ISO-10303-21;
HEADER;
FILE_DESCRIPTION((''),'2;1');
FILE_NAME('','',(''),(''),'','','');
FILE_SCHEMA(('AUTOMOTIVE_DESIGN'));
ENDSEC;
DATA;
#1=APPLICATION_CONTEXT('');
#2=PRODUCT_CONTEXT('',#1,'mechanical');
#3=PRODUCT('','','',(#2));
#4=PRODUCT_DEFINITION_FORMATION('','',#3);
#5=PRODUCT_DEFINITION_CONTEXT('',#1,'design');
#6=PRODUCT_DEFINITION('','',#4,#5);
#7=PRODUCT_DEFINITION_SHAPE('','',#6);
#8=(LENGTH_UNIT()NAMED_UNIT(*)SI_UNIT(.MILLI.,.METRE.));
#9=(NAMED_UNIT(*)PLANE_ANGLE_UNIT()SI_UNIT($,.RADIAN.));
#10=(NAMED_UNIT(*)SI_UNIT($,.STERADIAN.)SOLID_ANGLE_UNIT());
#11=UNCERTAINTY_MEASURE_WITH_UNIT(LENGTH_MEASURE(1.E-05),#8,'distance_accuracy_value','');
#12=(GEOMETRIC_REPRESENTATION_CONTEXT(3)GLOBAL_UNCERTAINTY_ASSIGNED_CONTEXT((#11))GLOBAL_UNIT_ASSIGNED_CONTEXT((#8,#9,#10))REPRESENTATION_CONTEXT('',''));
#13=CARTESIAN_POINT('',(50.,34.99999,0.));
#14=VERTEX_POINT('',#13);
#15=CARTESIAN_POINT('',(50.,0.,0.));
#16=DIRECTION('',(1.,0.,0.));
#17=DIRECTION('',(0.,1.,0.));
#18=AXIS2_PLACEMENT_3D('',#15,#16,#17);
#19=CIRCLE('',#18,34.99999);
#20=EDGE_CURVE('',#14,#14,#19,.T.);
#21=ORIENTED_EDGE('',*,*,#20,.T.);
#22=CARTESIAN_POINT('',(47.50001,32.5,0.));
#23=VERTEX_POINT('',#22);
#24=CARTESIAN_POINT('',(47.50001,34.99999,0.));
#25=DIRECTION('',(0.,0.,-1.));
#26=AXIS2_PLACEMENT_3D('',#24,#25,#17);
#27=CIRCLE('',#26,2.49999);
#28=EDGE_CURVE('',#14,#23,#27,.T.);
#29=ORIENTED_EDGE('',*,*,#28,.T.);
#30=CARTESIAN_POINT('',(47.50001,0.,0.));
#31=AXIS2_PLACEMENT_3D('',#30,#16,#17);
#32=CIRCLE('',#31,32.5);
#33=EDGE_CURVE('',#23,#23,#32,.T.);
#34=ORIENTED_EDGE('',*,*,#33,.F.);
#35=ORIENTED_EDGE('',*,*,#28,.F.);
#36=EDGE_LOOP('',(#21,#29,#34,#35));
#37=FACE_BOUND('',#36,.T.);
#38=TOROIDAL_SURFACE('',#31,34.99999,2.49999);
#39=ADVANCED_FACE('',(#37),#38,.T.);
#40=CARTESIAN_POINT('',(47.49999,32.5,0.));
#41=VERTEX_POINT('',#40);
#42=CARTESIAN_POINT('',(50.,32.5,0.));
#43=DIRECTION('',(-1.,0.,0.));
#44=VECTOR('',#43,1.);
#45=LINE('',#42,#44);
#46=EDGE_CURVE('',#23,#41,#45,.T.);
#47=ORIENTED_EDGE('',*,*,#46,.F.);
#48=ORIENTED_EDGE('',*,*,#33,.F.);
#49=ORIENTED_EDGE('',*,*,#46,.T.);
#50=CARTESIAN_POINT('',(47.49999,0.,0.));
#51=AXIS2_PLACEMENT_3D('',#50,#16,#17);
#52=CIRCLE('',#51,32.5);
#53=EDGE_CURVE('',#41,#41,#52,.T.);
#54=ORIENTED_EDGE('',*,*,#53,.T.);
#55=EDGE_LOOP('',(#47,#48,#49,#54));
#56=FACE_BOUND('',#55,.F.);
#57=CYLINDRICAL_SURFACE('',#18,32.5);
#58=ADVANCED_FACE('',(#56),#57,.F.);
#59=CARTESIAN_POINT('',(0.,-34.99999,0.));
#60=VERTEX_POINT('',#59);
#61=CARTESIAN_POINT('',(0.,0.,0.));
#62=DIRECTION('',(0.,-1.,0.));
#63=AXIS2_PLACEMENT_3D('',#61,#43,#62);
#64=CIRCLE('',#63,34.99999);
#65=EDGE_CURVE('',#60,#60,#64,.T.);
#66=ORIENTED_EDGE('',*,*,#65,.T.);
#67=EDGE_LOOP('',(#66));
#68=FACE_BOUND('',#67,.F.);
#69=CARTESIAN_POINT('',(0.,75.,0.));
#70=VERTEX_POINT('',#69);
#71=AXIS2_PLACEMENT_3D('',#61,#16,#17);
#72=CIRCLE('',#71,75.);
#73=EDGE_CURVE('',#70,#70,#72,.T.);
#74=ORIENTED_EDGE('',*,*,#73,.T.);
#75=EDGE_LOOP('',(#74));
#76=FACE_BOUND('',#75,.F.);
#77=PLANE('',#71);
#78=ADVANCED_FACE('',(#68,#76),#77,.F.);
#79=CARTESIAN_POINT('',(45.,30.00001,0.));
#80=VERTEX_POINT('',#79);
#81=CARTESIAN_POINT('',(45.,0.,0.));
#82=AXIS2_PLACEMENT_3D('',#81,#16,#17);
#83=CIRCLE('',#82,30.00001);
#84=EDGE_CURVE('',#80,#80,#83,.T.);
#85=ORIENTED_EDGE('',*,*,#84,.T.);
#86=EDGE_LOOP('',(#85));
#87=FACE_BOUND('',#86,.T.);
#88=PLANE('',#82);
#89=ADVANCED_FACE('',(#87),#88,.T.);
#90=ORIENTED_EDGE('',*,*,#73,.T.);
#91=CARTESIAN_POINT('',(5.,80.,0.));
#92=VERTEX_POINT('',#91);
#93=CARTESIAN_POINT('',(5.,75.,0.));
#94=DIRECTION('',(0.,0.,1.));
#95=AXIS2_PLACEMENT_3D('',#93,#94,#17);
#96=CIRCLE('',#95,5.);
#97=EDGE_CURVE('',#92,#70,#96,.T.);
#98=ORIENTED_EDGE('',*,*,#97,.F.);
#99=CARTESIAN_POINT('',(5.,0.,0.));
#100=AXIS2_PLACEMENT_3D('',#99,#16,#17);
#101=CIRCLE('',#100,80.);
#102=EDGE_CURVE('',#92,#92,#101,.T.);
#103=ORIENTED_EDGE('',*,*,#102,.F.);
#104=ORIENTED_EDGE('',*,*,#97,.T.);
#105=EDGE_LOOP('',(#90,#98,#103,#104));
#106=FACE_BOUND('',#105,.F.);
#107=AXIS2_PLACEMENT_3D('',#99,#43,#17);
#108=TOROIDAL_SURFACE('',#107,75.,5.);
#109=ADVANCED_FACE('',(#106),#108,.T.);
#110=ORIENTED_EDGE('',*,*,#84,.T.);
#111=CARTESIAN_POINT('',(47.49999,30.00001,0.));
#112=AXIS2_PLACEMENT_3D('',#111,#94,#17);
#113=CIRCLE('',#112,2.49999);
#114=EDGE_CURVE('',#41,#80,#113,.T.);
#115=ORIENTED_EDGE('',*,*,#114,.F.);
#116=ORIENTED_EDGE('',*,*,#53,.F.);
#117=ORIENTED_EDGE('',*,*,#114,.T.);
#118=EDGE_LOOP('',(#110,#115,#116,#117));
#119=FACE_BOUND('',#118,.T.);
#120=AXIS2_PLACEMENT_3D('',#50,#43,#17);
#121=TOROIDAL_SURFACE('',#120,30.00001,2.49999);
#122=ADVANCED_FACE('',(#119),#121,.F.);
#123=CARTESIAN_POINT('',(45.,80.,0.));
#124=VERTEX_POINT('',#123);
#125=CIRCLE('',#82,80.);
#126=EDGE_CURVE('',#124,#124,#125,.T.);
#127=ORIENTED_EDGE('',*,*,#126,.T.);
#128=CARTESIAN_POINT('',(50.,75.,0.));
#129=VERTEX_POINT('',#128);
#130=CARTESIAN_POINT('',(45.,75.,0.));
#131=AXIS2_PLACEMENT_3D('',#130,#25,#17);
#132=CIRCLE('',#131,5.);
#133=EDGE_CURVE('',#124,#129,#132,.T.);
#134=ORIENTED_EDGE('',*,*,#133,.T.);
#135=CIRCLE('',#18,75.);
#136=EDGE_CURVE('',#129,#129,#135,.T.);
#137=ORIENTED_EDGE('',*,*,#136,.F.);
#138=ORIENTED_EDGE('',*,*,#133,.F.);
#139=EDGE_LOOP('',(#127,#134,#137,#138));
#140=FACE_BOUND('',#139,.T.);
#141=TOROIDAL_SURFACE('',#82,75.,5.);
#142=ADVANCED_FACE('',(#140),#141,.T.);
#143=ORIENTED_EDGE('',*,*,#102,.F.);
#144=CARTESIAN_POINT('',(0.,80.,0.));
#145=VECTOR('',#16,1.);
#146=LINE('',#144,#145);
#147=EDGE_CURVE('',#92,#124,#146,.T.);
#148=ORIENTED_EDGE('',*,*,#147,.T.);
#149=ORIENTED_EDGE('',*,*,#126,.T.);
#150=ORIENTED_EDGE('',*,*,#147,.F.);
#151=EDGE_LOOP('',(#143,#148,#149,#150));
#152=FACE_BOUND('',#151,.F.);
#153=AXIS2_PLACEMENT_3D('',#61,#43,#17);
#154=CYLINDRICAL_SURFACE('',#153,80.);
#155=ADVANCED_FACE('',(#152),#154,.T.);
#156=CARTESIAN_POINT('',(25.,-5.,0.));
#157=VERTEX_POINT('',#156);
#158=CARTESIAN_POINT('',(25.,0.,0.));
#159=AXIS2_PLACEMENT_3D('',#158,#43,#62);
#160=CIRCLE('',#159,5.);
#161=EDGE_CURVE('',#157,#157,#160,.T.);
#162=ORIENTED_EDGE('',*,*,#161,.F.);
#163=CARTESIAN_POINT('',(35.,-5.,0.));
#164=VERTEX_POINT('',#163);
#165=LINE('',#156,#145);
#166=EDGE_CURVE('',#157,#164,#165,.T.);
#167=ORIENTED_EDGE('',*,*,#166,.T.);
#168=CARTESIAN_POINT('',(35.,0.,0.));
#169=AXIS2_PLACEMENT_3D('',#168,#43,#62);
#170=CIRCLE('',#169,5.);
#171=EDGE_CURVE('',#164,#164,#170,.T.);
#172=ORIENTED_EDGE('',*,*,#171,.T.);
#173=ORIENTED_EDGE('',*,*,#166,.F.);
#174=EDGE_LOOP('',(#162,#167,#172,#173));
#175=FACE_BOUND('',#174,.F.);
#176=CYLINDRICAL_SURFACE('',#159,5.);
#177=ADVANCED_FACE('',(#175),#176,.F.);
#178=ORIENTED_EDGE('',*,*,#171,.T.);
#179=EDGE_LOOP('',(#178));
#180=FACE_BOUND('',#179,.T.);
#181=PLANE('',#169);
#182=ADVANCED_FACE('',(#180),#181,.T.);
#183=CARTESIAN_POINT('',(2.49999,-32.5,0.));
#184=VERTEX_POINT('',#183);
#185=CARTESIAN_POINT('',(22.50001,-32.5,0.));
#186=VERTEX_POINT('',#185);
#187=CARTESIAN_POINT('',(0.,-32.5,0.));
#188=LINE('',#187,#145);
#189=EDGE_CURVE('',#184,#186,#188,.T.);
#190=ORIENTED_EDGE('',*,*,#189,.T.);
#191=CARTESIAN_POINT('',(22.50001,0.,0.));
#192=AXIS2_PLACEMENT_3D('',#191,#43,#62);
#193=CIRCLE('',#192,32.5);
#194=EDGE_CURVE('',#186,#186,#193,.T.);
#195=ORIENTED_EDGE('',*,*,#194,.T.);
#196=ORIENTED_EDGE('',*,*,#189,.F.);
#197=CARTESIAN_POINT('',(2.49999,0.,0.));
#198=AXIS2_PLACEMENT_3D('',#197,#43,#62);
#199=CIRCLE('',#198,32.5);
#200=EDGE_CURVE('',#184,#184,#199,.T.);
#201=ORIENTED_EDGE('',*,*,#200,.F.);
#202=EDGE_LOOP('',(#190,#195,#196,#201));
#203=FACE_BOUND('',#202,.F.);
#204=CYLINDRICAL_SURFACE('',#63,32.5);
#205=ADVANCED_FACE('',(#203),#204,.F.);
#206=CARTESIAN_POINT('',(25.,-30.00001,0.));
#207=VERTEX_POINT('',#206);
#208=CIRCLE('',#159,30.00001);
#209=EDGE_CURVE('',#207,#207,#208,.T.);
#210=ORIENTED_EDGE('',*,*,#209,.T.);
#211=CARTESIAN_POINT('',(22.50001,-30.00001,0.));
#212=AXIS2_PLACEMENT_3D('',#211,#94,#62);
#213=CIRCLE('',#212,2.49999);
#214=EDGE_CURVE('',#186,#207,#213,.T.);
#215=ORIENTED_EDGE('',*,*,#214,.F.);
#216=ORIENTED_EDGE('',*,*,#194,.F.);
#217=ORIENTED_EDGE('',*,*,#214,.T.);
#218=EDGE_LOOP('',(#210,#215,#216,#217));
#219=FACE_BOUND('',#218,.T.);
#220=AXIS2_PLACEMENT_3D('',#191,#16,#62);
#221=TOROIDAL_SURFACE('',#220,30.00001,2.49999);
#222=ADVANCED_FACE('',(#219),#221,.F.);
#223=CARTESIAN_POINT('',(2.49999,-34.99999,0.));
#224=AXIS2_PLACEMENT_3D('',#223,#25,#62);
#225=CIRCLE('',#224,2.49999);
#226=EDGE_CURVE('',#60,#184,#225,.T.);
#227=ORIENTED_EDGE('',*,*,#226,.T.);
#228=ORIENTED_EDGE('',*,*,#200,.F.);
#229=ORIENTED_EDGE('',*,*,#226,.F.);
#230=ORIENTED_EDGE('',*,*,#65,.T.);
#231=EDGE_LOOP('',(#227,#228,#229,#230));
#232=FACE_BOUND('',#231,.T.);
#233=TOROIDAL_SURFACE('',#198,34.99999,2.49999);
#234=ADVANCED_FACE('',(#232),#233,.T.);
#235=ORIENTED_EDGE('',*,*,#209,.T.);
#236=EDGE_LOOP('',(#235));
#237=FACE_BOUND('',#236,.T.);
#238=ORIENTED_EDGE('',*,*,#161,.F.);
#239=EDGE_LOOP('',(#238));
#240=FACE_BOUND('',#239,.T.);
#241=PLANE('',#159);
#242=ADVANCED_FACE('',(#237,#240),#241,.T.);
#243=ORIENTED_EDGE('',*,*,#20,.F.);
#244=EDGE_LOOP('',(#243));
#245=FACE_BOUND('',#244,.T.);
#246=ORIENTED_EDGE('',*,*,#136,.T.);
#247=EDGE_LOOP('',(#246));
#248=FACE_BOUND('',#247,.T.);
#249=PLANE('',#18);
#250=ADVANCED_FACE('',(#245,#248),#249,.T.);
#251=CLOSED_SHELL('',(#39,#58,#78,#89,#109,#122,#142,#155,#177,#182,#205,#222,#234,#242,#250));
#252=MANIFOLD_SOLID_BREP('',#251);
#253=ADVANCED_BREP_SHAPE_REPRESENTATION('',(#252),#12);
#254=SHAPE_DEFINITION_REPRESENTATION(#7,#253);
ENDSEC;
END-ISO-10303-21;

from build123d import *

# Parameters (mm, degrees)
F0_R     = 80
F1_DEPTH = 50
F2_R     = 32.5
F3_DEPTH = 5
F4_R     = 32.5
F5_DEPTH = 25
F6_R     = 5
F7_DEPTH = 10
F8_R     = 5
F9_R     = 2.49999


# Not quite as in the source:
# - a fillet or chamfer is up to 0.001 mm smaller than in the source, because OpenCascade refuses the exact size


with BuildPart() as f1:
    # F0 (on Right) → F1 (new body)
    with BuildSketch(Plane.YZ):
        Circle(F0_R)
    extrude(amount=F1_DEPTH)

    # F2 (on face) → F3 (cut)
    with BuildSketch(Plane.YZ.offset(50)):
        Circle(F2_R)
    extrude(amount=-F3_DEPTH, mode=Mode.SUBTRACT)

    # F4 (on face) → F5 (cut)
    with BuildSketch(Plane(origin=(0, 0, 0), x_dir=(0, -1, 0), z_dir=(-1, 0, 0))):
        Circle(F4_R)
    extrude(amount=-F5_DEPTH, mode=Mode.SUBTRACT)

    # F6 (on face) → F7 (cut)
    with BuildSketch(Plane(origin=(25, 0, 0), x_dir=(0, -1, 0), z_dir=(-1, 0, 0))):
        Circle(F6_R)
    extrude(amount=-F7_DEPTH, mode=Mode.SUBTRACT)

    # F8
    f8_edges = [f1.edges().sort_by_distance(p)[0] for p in [
        (0, -80, 0),
        (50, -80, 0),
    ]]
    fillet(f8_edges, radius=F8_R)

    # F9 (radius 2.5 in the source; OpenCascade refuses exactly that, so slightly less here)
    f9_edges = [f1.edges().sort_by_distance(p)[0] for p in [
        (50, -32.5, 0),
        (45, -32.5, 0),
        (0, 32.5, 0),
        (25, 32.5, 0),
    ]]
    fillet(f9_edges, radius=F9_R)


solid = f1.part
